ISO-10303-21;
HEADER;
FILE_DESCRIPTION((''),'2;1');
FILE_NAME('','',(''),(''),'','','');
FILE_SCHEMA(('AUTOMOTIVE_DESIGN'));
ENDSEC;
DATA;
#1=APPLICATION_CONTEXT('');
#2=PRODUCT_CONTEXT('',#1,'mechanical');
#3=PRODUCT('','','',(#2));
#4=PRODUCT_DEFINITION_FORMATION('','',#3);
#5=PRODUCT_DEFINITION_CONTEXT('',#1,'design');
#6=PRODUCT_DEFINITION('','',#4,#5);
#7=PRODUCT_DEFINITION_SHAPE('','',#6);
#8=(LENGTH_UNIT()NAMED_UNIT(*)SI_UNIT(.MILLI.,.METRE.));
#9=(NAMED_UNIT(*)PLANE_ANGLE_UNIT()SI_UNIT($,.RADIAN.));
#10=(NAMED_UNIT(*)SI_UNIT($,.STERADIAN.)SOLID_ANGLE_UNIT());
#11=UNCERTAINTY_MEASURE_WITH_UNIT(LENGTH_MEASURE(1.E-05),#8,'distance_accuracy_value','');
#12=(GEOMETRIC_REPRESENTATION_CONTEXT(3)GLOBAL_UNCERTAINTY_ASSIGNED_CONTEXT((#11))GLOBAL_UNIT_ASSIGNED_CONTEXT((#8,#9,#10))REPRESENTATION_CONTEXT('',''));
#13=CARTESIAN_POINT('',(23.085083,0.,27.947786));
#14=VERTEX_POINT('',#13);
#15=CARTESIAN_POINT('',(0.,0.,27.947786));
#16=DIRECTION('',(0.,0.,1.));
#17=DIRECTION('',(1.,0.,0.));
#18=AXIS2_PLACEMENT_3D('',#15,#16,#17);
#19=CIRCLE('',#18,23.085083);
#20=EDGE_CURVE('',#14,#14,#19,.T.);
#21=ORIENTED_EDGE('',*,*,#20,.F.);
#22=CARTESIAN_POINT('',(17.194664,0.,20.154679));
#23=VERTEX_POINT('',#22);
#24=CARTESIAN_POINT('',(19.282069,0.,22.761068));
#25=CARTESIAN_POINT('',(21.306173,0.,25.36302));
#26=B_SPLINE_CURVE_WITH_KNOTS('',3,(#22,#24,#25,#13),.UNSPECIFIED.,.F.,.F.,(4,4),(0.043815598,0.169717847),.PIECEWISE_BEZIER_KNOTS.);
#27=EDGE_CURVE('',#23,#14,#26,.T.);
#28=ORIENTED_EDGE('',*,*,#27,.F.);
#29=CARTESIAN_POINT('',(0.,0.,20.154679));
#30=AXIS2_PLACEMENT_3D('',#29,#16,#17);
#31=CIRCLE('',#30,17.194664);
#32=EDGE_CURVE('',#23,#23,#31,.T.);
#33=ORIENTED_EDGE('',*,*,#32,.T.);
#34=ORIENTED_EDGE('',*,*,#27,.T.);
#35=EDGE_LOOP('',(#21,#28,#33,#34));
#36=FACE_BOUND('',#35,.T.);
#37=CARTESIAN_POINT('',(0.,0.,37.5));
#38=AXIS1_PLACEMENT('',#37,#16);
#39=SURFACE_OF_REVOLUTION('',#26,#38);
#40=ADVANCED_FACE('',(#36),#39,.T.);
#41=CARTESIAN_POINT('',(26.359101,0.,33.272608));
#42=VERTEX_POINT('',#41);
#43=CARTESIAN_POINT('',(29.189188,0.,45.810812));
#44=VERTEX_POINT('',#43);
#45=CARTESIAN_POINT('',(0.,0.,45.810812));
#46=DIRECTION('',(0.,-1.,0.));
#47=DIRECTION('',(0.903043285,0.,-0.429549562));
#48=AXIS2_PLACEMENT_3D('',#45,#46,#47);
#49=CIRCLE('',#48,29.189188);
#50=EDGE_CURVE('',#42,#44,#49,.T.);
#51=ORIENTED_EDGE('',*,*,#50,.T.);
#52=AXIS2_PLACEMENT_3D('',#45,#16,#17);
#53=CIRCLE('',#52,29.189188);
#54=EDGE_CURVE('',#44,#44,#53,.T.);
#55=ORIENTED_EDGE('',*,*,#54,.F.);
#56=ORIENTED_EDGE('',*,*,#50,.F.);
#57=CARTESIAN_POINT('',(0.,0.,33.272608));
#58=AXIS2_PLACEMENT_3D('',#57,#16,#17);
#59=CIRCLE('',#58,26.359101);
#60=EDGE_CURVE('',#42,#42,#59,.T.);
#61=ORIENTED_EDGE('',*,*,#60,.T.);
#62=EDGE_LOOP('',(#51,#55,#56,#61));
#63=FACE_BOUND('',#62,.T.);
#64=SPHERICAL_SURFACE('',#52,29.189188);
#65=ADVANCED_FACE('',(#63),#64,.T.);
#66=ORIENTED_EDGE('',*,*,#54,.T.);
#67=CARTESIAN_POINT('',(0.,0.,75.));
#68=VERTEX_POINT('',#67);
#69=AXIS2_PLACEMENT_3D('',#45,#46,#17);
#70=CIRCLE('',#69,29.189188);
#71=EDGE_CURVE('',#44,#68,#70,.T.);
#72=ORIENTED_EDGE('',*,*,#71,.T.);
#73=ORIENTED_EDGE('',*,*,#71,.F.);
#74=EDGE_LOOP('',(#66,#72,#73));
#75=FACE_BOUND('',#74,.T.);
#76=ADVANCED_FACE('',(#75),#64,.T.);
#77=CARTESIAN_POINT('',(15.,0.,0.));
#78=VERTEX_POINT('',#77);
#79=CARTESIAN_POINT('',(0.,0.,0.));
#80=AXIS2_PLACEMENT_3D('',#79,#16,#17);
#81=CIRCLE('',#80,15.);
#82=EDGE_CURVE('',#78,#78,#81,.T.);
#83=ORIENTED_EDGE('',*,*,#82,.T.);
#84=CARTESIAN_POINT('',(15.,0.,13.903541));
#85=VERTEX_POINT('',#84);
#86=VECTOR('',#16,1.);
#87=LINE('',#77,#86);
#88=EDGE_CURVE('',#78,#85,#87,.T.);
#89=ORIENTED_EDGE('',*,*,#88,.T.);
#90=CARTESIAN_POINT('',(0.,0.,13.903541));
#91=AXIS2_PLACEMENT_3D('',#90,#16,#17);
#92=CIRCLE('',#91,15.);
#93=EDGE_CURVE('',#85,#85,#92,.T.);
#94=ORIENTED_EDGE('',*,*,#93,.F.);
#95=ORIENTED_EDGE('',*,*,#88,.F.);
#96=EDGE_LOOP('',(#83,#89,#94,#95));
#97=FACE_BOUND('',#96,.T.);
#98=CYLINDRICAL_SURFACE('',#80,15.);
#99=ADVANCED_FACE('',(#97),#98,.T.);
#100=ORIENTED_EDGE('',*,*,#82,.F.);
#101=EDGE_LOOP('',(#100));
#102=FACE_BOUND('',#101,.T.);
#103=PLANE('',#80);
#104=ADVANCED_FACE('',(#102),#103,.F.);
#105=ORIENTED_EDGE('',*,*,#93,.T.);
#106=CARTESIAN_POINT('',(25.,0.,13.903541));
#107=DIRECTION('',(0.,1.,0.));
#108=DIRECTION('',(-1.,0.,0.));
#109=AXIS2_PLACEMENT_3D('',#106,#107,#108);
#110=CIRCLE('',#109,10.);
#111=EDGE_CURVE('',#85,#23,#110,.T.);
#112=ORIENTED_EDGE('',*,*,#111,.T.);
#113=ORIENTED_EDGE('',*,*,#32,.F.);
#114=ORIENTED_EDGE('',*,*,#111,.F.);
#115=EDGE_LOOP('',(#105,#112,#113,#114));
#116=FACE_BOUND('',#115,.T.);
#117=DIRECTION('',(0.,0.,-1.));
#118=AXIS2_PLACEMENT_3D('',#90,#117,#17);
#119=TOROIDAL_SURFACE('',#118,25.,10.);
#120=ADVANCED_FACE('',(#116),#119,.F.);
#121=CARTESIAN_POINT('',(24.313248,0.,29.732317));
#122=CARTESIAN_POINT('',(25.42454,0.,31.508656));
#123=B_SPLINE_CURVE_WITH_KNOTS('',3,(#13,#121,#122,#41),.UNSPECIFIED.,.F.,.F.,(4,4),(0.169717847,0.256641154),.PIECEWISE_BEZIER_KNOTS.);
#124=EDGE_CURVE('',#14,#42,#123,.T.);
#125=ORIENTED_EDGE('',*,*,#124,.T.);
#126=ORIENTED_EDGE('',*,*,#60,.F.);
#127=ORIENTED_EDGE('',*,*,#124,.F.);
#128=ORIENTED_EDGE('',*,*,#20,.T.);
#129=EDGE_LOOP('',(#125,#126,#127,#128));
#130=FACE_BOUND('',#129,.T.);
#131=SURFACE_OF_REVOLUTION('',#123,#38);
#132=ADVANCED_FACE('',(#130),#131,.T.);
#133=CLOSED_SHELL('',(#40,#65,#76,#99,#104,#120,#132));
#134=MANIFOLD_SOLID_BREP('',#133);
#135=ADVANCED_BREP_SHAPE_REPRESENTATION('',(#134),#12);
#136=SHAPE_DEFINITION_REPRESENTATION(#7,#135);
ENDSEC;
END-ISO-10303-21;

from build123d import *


with BuildPart() as f1:
    # F0 (on Front) → F1 (revolve)
    with BuildSketch(Plane.XZ):
        with BuildLine():
            Line((0, 17.4324345394), (0, 0))
            Line((0, 0), (15, 0))
            Line((15, 0), (15, 13.903540875))
            ThreePointArc((15, 13.903540875), (15.5646049408, 17.2161410738), (17.1946640153, 20.1546791847))
            add(Edge.make_bspline(
                [(17.1946640153, 20.1546791847), (19.2820687523, 22.7610677336), (21.3061725207, 25.3630195661), (23.0850826912, 27.947785967)],
                knots=[0.0438155979, 0.0438155979, 0.0438155979, 0.0438155979, 0.1697178469, 0.1697178469, 0.1697178469, 0.1697178469], degree=3))
            add(Edge.make_bspline(
                [(23.0850826912, 27.947785967), (24.3132478505, 29.7323167944), (25.4245398901, 31.5086560743), (26.3591006498, 33.272608394)],
                knots=[0.1697178469, 0.1697178469, 0.1697178469, 0.1697178469, 0.2566411543, 0.2566411543, 0.2566411543, 0.2566411543], degree=3))
            ThreePointArc((26.3591006498, 33.272608394), (28.4728772846, 39.383993976), (29.1891884869, 45.8108115131))
            add(Edge.make_bspline(
                [(29.1891884869, 45.8108115131), (27.5186066734, 56.1054005015), (13.7593033367, 65.5527002508), (0, 75)],
                knots=[0.4671507953, 0.4671507953, 0.4671507953, 0.4671507953, 1, 1, 1, 1], degree=3))
            Line((0, 75), (0, 17.4324345394))
        make_face()
        with BuildLine():
            ThreePointArc((29.1891884869, 45.8108115131), (20.6398731164, 66.4506846295), (0, 75))
            add(Edge.make_bspline(
                [(29.1891884869, 45.8108115131), (27.5186066734, 56.1054005015), (13.7593033367, 65.5527002508), (0, 75)],
                knots=[0.4671507953, 0.4671507953, 0.4671507953, 0.4671507953, 1, 1, 1, 1], degree=3))
        make_face()
    revolve(axis=Axis((0, 0, 37.5), (0, 0, 1)))


solid = f1.part
